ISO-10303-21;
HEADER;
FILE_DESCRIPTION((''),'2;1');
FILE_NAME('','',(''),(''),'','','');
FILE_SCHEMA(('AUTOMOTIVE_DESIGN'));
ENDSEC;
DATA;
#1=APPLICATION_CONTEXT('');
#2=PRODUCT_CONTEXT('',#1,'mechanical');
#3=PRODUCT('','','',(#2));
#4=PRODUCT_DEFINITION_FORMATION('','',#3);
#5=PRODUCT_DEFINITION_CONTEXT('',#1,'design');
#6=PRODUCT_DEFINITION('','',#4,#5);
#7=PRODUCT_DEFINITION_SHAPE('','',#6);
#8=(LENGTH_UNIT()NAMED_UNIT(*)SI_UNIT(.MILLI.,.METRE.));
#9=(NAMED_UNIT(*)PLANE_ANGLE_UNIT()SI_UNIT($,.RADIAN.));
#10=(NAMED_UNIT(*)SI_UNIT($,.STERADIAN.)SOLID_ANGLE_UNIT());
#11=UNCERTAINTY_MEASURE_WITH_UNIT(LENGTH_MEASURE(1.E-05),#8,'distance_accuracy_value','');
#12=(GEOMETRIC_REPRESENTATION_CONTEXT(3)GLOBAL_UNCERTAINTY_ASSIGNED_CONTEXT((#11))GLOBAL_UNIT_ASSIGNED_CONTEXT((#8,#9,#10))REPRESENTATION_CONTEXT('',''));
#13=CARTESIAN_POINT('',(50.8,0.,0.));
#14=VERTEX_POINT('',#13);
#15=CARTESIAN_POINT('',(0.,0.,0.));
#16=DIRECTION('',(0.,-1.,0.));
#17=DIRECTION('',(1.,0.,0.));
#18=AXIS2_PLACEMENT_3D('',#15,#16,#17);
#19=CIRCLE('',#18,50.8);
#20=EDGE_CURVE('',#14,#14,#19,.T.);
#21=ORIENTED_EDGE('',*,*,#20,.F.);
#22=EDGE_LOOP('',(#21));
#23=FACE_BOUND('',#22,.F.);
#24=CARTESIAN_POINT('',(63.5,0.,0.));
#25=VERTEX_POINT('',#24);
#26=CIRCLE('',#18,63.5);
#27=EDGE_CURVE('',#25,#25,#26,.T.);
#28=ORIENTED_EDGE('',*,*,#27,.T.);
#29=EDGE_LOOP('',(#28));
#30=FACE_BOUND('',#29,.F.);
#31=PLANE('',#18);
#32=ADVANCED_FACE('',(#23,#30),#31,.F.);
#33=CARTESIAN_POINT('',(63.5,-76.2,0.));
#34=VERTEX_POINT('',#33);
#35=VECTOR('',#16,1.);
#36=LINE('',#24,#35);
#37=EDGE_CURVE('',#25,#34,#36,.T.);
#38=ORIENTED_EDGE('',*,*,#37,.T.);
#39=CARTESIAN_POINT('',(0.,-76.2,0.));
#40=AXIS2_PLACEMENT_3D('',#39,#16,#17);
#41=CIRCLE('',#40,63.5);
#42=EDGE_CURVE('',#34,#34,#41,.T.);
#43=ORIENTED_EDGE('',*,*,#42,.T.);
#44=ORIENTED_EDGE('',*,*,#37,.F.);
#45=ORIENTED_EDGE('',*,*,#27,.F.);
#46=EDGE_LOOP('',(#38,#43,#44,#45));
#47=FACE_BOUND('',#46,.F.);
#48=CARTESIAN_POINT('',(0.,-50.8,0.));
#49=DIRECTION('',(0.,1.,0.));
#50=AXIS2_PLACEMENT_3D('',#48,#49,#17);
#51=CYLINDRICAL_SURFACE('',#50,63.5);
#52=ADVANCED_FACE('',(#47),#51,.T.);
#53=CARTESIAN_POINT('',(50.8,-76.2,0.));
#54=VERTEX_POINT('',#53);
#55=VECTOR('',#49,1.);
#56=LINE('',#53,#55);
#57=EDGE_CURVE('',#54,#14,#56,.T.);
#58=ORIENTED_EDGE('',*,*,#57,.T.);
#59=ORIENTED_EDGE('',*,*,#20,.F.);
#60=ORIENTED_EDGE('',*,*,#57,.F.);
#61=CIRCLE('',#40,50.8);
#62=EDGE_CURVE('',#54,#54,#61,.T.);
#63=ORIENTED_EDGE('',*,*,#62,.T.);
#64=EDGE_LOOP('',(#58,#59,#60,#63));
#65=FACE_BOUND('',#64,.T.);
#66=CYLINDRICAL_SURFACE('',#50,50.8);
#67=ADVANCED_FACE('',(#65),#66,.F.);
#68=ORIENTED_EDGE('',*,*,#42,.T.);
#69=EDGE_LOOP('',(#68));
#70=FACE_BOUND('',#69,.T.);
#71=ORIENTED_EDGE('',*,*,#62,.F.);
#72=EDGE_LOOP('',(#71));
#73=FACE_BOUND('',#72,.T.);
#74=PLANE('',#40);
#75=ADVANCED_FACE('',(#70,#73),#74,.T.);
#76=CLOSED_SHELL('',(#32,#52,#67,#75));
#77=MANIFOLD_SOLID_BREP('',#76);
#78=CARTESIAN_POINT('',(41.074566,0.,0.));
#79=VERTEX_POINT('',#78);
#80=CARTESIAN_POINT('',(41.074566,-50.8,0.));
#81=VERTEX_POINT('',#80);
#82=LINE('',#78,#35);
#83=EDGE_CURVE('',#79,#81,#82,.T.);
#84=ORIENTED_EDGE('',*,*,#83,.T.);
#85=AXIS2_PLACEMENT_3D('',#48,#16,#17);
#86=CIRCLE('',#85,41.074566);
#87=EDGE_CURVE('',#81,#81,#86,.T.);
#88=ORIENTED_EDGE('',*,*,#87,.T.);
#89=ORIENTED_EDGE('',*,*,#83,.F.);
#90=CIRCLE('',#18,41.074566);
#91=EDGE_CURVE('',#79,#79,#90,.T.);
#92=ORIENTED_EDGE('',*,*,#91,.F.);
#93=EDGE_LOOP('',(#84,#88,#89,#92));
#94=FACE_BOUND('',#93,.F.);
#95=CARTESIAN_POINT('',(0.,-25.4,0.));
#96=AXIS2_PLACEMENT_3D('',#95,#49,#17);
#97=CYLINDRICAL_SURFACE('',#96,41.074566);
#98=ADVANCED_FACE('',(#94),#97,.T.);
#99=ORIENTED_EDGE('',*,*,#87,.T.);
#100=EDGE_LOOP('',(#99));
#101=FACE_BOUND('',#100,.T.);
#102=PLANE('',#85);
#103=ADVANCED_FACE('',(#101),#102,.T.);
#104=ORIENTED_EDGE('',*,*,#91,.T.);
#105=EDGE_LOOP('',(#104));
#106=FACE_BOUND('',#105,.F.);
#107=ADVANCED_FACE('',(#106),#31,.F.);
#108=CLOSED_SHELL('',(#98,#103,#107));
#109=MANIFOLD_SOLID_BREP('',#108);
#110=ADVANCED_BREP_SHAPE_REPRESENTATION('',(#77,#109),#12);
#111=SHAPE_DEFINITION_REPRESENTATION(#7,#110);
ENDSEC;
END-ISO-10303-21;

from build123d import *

# Parameters (mm, degrees)
F0_R     = 63.5
F0_R_2   = 50.8
F1_DEPTH = 50.8
F2_W     = 50.8
F2_H     = 50.8
F3_DEPTH = 50.8
F4_R     = 41.0745655778
F5_DEPTH = 25.4
F6_DEPTH = 25.4
F7_DEPTH = 25.4


# Not quite as in the source:
# - a feature names something its author has since deleted; it is built from what else it names


with BuildPart() as f1:
    # F0 (on Front) → F1 (new body)
    with BuildSketch(Plane.XZ):
        Circle(F0_R)
        Circle(F0_R_2, mode=Mode.SUBTRACT)
    extrude(amount=F1_DEPTH)

    # F6 (add): a face of the model
    f6_faces = [f1.faces().sort_by_distance(p)[0] for p in [
        (-61.7039487758, -50.8, 0),
    ]]
    extrude(f6_faces, amount=F6_DEPTH)


with BuildPart() as f3:
    # F2 (on Front) → F3 (new body)
    with BuildSketch(Plane.XZ):
        Rectangle(F2_W, F2_H)
    extrude(amount=F3_DEPTH)

    # F4 (on Front) → F5 (join)
    with BuildSketch(Plane.XZ):
        Circle(F4_R)
    extrude(amount=F5_DEPTH)

    # F7 (add): a face of the model
    f7_faces = [f3.faces().sort_by_distance(p)[0] for p in [
        (-39.9128014236, -25.4, 0),
    ]]
    extrude(f7_faces, amount=F7_DEPTH)


solid = Compound([f1.part, f3.part])
